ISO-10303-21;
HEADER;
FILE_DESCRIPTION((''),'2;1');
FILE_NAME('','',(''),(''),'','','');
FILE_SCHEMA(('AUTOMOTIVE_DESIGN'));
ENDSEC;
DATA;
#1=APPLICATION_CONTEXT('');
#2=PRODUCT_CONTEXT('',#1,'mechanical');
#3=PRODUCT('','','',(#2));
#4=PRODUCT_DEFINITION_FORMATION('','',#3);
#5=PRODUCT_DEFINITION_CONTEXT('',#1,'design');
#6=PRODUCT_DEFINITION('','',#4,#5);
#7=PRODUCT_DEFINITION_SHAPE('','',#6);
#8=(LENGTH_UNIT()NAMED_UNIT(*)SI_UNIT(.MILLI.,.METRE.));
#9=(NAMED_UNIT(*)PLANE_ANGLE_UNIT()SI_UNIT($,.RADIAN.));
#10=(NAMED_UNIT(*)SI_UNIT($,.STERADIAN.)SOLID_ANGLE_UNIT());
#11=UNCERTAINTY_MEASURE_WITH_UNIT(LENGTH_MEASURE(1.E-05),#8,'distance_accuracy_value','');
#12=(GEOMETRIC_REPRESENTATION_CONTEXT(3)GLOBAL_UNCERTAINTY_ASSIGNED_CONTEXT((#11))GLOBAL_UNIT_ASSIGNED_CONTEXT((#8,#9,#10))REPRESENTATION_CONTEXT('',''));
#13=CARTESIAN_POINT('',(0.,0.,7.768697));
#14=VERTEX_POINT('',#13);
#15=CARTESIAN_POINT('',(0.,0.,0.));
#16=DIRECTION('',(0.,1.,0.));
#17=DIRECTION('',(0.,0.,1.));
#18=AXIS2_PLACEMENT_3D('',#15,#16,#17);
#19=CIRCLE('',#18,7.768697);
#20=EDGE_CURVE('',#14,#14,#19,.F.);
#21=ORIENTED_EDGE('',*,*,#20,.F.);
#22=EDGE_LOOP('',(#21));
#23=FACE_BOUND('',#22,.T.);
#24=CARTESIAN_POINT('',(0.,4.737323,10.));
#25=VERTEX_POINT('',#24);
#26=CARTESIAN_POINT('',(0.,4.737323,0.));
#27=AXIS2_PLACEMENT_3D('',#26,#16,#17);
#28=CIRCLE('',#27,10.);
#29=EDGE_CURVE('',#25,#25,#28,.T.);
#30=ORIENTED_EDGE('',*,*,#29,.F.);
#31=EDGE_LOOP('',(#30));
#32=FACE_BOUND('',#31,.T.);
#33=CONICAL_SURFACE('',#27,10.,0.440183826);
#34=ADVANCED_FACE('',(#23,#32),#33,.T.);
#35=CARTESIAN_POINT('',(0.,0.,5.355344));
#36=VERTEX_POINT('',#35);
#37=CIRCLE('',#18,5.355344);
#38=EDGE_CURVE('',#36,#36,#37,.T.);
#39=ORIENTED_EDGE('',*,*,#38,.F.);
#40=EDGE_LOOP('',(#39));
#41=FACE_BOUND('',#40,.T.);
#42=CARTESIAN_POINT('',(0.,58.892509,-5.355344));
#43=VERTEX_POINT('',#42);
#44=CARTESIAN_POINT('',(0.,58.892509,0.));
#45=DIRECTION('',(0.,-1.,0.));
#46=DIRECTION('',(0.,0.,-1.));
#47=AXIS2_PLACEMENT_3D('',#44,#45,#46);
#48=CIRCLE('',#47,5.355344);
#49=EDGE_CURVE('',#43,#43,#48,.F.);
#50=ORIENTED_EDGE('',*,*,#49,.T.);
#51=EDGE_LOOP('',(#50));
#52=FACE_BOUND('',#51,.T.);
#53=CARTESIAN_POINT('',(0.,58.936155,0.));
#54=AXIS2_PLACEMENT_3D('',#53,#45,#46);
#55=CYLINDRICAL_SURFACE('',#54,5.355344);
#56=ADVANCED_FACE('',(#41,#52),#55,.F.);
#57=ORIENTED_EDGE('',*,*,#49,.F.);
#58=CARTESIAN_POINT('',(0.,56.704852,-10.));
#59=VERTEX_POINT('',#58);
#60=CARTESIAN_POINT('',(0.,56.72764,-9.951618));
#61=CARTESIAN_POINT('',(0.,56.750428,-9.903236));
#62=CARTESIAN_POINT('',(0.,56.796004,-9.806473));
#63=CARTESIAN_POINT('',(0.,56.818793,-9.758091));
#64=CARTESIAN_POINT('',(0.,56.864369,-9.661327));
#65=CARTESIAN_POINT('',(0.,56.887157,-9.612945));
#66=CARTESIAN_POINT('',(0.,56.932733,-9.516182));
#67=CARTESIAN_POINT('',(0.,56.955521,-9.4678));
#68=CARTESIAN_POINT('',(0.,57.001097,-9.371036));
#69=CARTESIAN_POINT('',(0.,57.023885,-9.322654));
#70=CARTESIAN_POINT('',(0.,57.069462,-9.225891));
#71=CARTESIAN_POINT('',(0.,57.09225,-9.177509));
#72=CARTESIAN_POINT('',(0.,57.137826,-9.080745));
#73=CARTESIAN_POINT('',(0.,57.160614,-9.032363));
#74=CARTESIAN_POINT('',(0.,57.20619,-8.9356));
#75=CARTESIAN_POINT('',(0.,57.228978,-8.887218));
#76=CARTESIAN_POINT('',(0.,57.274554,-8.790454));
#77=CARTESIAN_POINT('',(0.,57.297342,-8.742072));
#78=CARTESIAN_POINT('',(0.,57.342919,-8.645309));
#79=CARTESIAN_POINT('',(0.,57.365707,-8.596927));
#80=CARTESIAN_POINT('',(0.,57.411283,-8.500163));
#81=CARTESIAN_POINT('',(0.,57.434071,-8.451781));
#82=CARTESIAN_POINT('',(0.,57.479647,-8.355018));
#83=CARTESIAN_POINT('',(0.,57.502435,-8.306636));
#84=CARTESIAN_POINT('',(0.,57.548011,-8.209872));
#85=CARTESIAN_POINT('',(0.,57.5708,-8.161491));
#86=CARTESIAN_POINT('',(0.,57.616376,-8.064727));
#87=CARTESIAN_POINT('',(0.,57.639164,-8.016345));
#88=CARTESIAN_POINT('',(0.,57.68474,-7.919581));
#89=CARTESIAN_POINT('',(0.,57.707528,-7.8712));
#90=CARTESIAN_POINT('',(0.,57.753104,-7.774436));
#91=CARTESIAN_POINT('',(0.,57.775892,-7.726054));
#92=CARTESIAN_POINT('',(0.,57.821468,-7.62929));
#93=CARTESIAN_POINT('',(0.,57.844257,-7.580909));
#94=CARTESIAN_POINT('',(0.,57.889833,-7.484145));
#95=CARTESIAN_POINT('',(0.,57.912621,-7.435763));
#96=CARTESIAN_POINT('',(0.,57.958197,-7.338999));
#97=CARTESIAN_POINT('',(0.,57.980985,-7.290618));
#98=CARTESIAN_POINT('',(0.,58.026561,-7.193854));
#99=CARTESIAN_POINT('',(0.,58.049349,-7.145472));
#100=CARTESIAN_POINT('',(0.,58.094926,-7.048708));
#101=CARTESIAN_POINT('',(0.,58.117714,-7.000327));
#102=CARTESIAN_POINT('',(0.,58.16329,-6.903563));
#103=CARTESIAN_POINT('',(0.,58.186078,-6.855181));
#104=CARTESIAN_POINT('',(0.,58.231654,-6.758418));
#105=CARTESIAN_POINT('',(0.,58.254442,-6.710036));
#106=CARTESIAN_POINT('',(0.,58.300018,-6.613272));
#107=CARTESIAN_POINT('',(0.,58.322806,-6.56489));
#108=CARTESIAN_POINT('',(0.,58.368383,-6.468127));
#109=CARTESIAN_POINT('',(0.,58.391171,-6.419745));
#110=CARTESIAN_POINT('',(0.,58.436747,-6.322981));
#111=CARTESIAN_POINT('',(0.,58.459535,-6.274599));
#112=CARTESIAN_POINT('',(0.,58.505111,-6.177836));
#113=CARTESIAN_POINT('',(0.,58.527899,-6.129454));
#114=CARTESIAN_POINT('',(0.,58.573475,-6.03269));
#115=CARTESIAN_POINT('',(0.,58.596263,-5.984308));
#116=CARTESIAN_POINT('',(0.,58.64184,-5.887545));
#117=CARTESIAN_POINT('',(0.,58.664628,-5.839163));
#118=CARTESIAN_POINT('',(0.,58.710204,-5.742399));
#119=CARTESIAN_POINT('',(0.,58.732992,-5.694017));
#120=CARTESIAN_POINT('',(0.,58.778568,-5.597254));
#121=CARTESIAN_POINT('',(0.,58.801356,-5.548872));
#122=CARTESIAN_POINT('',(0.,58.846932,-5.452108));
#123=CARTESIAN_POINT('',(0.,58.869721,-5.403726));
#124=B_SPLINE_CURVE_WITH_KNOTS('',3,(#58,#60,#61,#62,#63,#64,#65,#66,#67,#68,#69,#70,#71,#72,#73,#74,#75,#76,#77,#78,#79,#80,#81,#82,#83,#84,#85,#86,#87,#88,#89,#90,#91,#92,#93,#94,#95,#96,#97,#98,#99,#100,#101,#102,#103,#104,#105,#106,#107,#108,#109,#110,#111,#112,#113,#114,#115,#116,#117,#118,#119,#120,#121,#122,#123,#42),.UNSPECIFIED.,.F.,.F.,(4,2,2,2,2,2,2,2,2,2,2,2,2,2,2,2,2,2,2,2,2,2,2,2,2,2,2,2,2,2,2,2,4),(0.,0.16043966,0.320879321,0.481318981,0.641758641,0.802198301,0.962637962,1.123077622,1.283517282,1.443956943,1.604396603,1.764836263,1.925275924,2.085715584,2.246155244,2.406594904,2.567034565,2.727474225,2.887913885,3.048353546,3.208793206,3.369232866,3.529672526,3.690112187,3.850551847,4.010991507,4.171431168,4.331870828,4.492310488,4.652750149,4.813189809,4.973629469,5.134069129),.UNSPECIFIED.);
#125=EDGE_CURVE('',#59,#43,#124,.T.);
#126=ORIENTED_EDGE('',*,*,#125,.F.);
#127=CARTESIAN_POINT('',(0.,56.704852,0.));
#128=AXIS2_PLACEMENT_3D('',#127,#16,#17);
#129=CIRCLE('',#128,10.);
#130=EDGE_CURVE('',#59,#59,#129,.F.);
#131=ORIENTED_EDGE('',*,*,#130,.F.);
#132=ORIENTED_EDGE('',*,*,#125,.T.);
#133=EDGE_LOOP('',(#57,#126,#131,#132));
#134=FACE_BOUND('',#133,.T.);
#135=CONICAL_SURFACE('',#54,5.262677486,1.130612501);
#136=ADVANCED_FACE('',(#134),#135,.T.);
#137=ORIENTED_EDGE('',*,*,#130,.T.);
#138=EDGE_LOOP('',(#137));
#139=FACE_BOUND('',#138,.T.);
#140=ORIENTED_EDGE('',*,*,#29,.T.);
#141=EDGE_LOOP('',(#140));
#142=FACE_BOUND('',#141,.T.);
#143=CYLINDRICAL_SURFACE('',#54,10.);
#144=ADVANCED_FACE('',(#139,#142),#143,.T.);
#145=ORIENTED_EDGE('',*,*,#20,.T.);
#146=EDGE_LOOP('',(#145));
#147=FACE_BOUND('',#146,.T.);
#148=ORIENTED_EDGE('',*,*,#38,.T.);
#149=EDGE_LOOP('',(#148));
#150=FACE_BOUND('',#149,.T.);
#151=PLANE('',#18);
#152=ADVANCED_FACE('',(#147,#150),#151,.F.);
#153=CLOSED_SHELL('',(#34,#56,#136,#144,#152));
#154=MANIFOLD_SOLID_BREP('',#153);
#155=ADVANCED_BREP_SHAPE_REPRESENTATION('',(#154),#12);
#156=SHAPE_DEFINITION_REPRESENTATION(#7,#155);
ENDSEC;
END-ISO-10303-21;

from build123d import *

# Parameters (mm, degrees)
SKETCH1_R           = 10
BOSS_EXTRUDE1_DEPTH = 58.936155
SKETCH2_R           = 5.355344486
CUT_EXTRUDE1_DEPTH  = 61.609160745
CHAMFER1_SIZE       = 2.231303
CHAMFER1_SIZE_2     = 4.737323


with BuildPart() as part:
    # Sketch1 → Boss-Extrude1 (new body)
    with BuildSketch(Plane(origin=(0, 0, 0), x_dir=(1, 0, 0), z_dir=(0, 1, 0))):
        with Locations(Location((0, 0, 0), (0, 0, 270))):
            Circle(SKETCH1_R)
    extrude(amount=BOSS_EXTRUDE1_DEPTH)

    # Sketch2 → Cut-Extrude1 (cut, through all)
    with BuildSketch(Plane(origin=(0, 0, 0), x_dir=(1, 0, 0), z_dir=(0, 1, 0))):
        with Locations(Location((0, 0, 0), (0, 0, 270))):
            Circle(SKETCH2_R)
    extrude(amount=CUT_EXTRUDE1_DEPTH, mode=Mode.SUBTRACT)

    # Chamfer1
    # the kernel refuses this chamfer: 4.737323, 2.231303 mm, written as the material it takes off along each edge
    with BuildSketch(Plane(origin=(0, 58.936155, 0), x_dir=(0, 0, 1), z_dir=(-1, 0, 0))) as chamfer1_piece_1:
        Polygon((10, -CHAMFER1_SIZE), (10 - CHAMFER1_SIZE_2, 0), (10, 0), align=None)
    revolve(axis=Axis((0, 58.936155, 0), (0, 1, 0)), mode=Mode.SUBTRACT)
    with BuildSketch(Plane(origin=(0, 0, 0), x_dir=(0, 0, 1), z_dir=(-1, 0, 0))) as chamfer1_piece_2:
        Polygon((10, CHAMFER1_SIZE_2), (10 - CHAMFER1_SIZE, 0), (10, 0), align=None)
    revolve(axis=Axis((0, 0, 0), (0, 1, 0)), mode=Mode.SUBTRACT)


solid = part.part
